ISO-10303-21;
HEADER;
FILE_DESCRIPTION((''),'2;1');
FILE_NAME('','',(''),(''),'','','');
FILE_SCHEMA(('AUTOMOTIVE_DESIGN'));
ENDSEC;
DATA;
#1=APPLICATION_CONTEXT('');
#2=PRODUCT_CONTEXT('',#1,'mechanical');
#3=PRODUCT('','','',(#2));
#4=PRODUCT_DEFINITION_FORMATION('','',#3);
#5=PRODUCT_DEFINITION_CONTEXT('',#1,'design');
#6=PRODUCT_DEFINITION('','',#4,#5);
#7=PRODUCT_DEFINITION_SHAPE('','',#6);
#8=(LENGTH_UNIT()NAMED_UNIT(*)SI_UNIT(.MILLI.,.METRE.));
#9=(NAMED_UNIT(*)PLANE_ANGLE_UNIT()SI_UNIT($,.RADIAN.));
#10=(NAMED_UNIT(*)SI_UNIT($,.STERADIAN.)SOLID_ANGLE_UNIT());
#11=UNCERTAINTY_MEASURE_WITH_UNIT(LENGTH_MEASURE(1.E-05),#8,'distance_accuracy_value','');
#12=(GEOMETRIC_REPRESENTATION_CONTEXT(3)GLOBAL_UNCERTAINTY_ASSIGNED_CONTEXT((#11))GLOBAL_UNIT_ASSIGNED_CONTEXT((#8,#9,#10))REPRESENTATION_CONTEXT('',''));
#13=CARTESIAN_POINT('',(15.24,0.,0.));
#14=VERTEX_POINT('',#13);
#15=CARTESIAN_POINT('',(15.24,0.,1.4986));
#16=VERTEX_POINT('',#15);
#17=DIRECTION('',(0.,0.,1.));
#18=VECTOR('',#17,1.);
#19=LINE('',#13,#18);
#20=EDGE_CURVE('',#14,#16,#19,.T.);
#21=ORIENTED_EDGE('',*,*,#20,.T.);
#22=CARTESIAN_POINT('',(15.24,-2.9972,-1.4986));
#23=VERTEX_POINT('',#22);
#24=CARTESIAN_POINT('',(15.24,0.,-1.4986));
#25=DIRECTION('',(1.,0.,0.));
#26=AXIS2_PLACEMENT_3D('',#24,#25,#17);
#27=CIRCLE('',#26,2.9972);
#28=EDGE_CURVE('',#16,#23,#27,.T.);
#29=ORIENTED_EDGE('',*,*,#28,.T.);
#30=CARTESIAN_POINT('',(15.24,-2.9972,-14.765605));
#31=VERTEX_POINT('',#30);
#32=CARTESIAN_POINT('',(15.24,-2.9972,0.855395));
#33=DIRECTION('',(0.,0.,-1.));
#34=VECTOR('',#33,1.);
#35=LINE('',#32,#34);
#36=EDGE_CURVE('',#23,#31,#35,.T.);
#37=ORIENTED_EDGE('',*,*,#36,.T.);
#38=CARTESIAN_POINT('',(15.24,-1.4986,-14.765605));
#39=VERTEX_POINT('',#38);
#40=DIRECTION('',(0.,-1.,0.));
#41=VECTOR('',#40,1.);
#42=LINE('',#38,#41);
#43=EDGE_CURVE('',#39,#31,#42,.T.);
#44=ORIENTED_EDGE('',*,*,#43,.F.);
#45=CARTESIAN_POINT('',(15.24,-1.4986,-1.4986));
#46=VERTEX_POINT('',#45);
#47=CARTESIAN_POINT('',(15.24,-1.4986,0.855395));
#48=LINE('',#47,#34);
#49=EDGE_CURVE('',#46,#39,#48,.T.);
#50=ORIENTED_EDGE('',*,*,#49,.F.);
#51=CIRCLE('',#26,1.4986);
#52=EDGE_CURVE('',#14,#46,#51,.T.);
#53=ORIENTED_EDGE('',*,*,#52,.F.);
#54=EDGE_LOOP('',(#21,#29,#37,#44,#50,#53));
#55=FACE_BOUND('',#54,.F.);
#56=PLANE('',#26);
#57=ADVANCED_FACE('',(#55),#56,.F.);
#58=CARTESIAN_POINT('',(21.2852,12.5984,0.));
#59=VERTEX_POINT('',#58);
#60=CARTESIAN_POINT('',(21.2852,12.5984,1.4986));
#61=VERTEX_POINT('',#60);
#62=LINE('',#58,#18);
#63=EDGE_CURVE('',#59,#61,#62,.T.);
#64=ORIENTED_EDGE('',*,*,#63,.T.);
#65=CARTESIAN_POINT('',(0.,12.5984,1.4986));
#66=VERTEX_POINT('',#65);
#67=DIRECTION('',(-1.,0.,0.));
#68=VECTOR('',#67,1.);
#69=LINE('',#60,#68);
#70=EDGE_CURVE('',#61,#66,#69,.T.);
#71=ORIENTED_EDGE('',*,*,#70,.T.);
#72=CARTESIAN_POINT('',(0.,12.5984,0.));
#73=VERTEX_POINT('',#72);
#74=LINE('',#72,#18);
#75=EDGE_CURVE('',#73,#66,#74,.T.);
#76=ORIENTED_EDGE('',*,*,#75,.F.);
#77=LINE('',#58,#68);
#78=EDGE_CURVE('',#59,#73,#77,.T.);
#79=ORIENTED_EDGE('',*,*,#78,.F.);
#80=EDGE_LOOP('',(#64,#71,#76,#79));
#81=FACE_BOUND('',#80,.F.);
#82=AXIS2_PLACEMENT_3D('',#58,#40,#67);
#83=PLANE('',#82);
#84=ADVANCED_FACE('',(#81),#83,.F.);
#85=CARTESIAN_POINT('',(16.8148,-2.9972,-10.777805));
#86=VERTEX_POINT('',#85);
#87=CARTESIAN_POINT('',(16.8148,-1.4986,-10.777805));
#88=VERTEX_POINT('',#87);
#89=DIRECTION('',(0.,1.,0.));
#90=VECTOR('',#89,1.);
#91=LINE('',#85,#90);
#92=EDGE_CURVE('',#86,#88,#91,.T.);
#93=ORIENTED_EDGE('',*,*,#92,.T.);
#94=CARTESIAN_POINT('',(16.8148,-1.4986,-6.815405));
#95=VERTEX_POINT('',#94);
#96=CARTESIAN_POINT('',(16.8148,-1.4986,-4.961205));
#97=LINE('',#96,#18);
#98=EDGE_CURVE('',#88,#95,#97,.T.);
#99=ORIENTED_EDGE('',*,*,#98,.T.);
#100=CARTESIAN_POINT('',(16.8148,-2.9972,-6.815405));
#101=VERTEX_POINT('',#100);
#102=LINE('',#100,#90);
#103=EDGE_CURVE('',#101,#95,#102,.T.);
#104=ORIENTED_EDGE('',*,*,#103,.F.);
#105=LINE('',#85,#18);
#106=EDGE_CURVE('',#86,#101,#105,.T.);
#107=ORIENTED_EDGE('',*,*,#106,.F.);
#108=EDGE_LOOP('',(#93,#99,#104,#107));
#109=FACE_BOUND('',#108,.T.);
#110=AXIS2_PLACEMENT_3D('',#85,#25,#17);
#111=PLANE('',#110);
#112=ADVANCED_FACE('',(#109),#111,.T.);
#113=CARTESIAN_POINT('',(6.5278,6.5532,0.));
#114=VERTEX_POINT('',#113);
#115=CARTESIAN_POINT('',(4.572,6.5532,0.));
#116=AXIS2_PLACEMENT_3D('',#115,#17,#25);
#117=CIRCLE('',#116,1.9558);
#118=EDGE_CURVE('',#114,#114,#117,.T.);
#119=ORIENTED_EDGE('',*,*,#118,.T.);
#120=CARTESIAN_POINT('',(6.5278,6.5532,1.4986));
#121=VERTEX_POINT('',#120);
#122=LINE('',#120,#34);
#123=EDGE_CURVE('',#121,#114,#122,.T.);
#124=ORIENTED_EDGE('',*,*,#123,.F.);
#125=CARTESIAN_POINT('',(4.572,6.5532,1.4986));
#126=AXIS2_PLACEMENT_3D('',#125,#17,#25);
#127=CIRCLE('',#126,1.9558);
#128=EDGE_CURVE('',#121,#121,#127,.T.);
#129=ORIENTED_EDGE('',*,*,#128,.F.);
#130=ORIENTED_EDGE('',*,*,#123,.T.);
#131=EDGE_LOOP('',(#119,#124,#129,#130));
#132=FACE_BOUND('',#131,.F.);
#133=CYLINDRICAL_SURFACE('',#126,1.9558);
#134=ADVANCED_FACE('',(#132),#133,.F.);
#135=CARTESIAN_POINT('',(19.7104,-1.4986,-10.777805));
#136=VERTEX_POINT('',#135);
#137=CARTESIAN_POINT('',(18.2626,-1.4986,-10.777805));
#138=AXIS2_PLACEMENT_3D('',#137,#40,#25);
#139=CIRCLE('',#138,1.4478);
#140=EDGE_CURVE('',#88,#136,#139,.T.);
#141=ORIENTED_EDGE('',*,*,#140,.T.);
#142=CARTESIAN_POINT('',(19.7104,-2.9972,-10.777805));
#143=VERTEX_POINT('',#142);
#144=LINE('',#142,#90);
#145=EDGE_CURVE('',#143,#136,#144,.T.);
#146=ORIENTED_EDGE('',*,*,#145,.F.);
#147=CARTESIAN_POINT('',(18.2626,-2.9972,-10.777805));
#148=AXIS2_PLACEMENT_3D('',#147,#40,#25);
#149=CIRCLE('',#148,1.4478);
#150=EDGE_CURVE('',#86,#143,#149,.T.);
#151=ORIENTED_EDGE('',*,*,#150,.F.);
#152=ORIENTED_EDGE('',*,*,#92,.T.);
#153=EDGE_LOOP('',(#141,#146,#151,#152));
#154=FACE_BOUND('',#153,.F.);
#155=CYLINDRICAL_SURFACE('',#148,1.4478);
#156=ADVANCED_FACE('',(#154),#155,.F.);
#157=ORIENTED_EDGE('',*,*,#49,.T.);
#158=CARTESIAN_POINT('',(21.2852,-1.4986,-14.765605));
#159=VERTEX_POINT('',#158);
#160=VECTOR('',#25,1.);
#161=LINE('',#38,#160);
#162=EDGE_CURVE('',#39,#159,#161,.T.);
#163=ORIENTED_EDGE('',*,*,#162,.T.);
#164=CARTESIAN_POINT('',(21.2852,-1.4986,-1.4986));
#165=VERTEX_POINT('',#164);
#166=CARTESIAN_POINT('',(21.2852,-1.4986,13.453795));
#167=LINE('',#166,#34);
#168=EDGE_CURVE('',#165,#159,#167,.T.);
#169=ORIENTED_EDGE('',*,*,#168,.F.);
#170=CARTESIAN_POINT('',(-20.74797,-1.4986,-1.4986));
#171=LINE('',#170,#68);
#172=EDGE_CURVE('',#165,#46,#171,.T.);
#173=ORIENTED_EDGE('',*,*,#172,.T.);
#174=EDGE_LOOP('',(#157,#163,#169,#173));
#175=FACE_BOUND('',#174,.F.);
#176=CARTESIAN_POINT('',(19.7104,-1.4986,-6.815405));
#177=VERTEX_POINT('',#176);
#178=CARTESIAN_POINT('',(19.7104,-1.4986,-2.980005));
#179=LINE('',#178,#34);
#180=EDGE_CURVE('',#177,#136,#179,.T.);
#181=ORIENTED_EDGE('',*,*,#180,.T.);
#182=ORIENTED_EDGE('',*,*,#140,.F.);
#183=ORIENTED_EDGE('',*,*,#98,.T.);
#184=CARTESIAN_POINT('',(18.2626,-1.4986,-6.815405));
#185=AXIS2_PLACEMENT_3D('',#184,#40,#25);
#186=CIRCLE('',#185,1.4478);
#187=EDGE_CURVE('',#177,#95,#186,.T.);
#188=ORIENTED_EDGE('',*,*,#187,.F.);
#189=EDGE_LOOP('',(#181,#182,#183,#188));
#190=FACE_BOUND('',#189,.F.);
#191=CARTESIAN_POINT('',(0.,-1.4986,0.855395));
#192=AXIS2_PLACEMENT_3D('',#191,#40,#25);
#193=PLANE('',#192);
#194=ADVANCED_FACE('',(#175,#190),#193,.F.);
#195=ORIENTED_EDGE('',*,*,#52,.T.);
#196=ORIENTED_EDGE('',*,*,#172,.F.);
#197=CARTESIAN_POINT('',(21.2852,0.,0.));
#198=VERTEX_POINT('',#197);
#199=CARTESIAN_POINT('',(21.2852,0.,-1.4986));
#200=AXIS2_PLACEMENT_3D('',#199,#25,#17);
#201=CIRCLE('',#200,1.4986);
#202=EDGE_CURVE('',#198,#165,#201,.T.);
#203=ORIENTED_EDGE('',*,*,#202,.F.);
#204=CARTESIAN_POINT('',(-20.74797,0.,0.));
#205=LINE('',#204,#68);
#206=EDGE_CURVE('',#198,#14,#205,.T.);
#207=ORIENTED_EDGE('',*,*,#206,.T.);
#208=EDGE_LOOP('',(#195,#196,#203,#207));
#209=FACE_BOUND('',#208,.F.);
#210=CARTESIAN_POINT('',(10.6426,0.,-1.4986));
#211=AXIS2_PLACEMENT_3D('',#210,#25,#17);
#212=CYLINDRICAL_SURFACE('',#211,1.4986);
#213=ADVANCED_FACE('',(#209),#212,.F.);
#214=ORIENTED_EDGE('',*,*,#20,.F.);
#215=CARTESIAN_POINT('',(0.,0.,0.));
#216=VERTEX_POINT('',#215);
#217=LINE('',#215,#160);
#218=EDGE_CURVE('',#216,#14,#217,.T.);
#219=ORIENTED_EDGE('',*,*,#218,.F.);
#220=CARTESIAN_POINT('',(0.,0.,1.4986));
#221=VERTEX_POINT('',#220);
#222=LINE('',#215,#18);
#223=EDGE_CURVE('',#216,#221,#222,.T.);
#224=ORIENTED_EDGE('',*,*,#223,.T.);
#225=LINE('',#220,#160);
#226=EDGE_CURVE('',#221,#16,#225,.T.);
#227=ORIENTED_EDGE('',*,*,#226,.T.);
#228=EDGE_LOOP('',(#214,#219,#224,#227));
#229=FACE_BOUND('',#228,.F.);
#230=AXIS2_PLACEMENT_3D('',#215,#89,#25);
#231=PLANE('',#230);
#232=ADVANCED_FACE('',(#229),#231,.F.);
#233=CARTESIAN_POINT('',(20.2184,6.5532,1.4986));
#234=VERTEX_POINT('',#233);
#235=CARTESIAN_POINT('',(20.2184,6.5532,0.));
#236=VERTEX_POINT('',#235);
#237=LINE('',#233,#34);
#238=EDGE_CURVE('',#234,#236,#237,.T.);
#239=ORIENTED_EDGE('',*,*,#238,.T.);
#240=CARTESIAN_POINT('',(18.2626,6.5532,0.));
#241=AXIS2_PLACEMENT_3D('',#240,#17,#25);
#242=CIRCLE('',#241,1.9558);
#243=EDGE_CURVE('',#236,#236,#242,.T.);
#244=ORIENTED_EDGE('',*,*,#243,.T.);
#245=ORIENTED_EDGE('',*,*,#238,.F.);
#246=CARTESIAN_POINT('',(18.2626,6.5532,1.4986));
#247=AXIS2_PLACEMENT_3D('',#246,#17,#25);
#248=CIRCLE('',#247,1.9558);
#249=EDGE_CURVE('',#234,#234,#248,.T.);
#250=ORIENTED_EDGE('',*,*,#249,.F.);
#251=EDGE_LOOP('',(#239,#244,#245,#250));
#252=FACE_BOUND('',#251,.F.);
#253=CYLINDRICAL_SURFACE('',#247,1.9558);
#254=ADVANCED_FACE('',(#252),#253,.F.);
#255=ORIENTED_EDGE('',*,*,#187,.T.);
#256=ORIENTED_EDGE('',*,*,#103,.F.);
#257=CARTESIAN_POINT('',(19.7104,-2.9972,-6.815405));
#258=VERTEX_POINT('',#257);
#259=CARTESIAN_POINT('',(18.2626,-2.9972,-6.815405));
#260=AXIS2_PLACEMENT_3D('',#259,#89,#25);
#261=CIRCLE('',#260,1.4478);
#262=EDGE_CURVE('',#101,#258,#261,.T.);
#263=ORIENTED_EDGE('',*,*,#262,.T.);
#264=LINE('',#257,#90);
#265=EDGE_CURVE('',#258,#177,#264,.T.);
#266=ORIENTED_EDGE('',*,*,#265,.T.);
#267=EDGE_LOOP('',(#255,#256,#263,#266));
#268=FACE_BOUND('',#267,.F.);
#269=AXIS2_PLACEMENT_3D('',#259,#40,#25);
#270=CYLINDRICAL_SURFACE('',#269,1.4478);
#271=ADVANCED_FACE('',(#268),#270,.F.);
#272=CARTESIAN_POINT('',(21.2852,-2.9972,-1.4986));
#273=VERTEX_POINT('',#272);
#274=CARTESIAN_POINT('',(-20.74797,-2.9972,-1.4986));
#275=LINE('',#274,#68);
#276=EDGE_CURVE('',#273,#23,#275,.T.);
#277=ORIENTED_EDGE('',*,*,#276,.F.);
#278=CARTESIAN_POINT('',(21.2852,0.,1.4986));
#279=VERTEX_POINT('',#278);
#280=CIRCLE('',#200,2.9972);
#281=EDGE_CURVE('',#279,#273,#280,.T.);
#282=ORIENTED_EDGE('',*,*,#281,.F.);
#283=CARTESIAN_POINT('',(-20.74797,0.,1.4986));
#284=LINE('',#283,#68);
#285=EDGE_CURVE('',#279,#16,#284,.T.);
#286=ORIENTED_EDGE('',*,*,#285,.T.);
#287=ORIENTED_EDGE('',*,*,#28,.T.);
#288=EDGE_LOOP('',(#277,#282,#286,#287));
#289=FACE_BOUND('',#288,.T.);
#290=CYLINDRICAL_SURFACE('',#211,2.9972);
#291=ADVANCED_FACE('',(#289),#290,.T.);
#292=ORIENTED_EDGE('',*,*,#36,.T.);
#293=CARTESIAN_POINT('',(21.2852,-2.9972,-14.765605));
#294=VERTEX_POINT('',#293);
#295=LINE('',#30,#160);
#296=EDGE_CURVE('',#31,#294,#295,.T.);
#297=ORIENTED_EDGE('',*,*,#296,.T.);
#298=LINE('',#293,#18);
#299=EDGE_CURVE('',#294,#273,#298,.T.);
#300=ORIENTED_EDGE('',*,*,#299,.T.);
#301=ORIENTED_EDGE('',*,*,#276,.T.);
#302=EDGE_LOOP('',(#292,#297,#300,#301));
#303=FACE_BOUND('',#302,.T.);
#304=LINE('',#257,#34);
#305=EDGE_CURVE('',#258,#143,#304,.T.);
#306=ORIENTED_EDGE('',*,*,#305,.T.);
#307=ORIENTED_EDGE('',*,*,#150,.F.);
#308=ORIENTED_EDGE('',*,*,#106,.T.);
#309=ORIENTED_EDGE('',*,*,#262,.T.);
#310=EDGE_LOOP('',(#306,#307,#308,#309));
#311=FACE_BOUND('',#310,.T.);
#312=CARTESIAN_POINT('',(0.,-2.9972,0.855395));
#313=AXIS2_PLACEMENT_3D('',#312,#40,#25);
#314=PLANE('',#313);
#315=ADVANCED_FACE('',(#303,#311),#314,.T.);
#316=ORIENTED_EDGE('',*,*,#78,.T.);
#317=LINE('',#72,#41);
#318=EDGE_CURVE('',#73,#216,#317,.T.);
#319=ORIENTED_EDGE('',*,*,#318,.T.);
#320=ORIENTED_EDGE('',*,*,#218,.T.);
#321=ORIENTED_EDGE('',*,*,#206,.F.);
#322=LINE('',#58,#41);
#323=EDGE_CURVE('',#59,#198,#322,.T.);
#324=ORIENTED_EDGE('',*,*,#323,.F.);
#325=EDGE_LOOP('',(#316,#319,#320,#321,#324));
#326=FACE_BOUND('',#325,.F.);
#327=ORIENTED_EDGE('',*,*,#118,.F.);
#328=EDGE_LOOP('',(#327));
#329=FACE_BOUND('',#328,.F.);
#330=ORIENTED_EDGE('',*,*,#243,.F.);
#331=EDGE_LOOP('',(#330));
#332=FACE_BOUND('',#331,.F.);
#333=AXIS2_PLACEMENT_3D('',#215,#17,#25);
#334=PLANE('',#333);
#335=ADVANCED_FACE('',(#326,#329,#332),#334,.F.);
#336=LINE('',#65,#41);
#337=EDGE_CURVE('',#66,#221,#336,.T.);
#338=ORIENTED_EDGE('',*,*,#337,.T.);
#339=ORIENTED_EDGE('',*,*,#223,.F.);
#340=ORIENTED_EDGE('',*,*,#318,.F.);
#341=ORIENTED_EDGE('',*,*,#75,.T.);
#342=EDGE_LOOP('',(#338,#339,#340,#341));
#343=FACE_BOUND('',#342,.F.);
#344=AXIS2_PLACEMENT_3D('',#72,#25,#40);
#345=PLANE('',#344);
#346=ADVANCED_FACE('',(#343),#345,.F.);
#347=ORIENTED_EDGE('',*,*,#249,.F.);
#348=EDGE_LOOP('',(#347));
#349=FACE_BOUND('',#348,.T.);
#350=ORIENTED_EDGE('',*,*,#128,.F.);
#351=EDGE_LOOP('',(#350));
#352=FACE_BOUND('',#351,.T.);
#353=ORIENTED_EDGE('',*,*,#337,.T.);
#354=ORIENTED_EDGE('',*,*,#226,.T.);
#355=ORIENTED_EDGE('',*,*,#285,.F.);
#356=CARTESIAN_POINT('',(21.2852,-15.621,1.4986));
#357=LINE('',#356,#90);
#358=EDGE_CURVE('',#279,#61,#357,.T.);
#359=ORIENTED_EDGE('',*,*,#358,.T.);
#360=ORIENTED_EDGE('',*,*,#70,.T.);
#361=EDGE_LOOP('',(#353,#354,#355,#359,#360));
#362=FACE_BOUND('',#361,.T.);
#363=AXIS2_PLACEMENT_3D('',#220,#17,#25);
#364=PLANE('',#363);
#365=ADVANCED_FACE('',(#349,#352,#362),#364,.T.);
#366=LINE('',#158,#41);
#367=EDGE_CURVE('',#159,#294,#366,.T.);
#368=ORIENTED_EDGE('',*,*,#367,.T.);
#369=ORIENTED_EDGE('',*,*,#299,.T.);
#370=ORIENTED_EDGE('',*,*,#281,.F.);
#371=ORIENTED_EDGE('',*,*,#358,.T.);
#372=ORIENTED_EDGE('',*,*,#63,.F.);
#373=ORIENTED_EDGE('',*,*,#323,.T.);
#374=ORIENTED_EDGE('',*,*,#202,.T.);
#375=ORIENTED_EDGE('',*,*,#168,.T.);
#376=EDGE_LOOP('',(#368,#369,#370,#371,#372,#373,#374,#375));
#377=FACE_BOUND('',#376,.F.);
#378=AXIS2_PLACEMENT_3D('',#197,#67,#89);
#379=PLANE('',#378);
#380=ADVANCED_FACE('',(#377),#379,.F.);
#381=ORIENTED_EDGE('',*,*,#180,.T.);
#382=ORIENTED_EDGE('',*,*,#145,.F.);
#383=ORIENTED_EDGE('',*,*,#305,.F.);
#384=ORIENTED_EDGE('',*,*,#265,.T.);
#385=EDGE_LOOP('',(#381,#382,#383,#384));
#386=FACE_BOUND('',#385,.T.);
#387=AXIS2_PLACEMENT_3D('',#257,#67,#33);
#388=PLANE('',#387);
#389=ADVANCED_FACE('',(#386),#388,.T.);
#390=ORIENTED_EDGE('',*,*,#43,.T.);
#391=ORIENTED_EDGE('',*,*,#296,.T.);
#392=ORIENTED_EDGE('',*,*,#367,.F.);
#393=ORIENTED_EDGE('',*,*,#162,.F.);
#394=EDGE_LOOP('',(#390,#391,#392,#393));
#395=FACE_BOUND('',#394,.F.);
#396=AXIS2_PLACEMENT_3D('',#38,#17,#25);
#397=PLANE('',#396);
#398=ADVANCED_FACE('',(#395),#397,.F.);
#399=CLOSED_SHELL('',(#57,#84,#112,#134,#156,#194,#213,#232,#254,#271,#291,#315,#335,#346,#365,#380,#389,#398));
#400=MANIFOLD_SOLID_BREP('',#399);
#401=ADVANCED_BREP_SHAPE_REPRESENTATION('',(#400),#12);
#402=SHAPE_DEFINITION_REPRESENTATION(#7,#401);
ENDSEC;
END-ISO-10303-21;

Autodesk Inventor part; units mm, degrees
ref_plane "YZ Plane" through (0, 0, 0) normal (1, 0, 0) x (0, 1, 0)
ref_plane "XZ Plane" through (0, 0, 0) normal (0, 1, 0) x (-1, 0, 0)
ref_plane "XY Plane" through (0, 0, 0) normal (0, 0, 1) x (1, 0, 0)
sketch "Sketch1" plane through (0, 0, 0) normal (0, 0, 1) x (1, 0, 0)
  line L0 (0, 0) -> (15.24, 0)
  line L1 (21.2852, 0) -> (21.2852, 12.5984)
  line L2 (21.2852, 12.5984) -> (0, 12.5984)
  line L3 (0, 12.5984) -> (0, 0)
  line L4 (15.24, 0) -> (15.24, -15.621)
  line L5 (15.24, -15.621) -> (21.2852, -15.621)
  line L6 (21.2852, -15.621) -> (21.2852, 0)
  line L7 (0, 0) -> (15.24, 0)
  dimension "d0" = 21.2852
  dimension "d1" = 12.5984
  dimension "d2" = 6.0452
  dimension "d3" = 15.621
extrude "Extrusion1" add sketch "Sketch1" along normal blind 1.4986
sketch "Sketch2" plane through (0, 0, 1.4986) normal (0, 0, 1) x (1, 0, 0)
  circle A0 centre (4.572, 6.5532) radius 1.9558
  line L0 (21.2852, 12.5984) -> (0, 12.5984) projected
  line L1 (0, 12.5984) -> (0, 0) projected
  circle A1 centre (18.2626, 6.5532) radius 1.9558
  dimension "d6" = 3.9116
  dimension "d7" = 6.0452
  dimension "d8" = 4.572
  dimension "d11" = 13.6906
extrude "Extrusion2" cut sketch "Sketch2" against normal blind 25.4
sketch "Sketch3" plane through (0, 0, 1.4986) normal (0, 0, 1) x (1, 0, 0)
  circle A0 centre (18.2626, -11.6332) radius 1.4478
  line L0 (15.24, -15.621) -> (21.2852, -15.621) projected
  line L1 (15.24, 0) -> (15.24, -15.621) projected
  circle A1 centre (18.2626, -7.6708) radius 1.4478
  line L2 (16.8148, -7.6708) -> (18.2626, -7.6708)
  line L3 (19.7104, -11.6332) -> (17.1196, -11.6332)
  point P0 (0, 0)
  dimension "d18" = 2.8956
  dimension "d19" = 3.9878
  dimension "d20" = 3.0226
  dimension "d26" = 3.9624
extrude "Extrusion4" cut sketch "Sketch3" against normal blind 25.4
sketch "Sketch6" plane through (0, 0, 1.4986) normal (0, 0, 1) x (1, 0, 0)
  circle A0 centre (18.2626, -7.6708) radius 1.4478 projected
  circle A1 centre (18.2626, -11.6332) radius 1.4478 projected
  line L0 (16.8148, -7.6708) -> (19.7104, -7.6708)
  line L1 (19.7104, -7.6708) -> (19.7104, -11.6332)
  line L2 (19.7104, -11.6332) -> (16.8148, -11.6332)
  line L3 (16.8148, -11.6332) -> (16.8148, -7.6708)
  point P0 (0, 0)
extrude "Extrusion5" cut sketch "Sketch6" against normal blind 25.4 contours L1 A1 L3 A0 | A0 L0 | L2 A1 picked at (18.2044, -8.1499) picked at (18.4337, -11.182)
sketch "Sketch17" plane through (0, 0, 0) normal (0, 0, -1) x (-1, 0, 0)
  line L0 (-21.2852, -15.621) -> (-21.2852, 12.5984) projected
  line L1 (-21.2852, 0) -> (-15.349, 0)
  point P0 (0, 0)
bend part "Bend Part3" radius 1.4986 angle 90 line through (21.2852, 0, 0) along (-1, 0, 0) centre toward (0, 0, -1) moving side (0, -1, 0) both sides no
equation "\"BendRadius\" = Thickness"
equation "\"BendReliefWidth\" = Thickness"
equation "\"BendReliefDepth\" = 0.5 * Thickness"
equation "\"CornerReliefSize\" = 4 * Thickness"
equation "\"MinimumRemnant\" = 2 * Thickness"
equation "\"TransitionRadius\" = BendRadius"
equation "\"JacobiRadiusSize\" = Thickness"
equation "\"GapSize\" = Thickness"
equation "\"Thickness\" = 3.048"
properties part number "dsub37bracket_redraw"
